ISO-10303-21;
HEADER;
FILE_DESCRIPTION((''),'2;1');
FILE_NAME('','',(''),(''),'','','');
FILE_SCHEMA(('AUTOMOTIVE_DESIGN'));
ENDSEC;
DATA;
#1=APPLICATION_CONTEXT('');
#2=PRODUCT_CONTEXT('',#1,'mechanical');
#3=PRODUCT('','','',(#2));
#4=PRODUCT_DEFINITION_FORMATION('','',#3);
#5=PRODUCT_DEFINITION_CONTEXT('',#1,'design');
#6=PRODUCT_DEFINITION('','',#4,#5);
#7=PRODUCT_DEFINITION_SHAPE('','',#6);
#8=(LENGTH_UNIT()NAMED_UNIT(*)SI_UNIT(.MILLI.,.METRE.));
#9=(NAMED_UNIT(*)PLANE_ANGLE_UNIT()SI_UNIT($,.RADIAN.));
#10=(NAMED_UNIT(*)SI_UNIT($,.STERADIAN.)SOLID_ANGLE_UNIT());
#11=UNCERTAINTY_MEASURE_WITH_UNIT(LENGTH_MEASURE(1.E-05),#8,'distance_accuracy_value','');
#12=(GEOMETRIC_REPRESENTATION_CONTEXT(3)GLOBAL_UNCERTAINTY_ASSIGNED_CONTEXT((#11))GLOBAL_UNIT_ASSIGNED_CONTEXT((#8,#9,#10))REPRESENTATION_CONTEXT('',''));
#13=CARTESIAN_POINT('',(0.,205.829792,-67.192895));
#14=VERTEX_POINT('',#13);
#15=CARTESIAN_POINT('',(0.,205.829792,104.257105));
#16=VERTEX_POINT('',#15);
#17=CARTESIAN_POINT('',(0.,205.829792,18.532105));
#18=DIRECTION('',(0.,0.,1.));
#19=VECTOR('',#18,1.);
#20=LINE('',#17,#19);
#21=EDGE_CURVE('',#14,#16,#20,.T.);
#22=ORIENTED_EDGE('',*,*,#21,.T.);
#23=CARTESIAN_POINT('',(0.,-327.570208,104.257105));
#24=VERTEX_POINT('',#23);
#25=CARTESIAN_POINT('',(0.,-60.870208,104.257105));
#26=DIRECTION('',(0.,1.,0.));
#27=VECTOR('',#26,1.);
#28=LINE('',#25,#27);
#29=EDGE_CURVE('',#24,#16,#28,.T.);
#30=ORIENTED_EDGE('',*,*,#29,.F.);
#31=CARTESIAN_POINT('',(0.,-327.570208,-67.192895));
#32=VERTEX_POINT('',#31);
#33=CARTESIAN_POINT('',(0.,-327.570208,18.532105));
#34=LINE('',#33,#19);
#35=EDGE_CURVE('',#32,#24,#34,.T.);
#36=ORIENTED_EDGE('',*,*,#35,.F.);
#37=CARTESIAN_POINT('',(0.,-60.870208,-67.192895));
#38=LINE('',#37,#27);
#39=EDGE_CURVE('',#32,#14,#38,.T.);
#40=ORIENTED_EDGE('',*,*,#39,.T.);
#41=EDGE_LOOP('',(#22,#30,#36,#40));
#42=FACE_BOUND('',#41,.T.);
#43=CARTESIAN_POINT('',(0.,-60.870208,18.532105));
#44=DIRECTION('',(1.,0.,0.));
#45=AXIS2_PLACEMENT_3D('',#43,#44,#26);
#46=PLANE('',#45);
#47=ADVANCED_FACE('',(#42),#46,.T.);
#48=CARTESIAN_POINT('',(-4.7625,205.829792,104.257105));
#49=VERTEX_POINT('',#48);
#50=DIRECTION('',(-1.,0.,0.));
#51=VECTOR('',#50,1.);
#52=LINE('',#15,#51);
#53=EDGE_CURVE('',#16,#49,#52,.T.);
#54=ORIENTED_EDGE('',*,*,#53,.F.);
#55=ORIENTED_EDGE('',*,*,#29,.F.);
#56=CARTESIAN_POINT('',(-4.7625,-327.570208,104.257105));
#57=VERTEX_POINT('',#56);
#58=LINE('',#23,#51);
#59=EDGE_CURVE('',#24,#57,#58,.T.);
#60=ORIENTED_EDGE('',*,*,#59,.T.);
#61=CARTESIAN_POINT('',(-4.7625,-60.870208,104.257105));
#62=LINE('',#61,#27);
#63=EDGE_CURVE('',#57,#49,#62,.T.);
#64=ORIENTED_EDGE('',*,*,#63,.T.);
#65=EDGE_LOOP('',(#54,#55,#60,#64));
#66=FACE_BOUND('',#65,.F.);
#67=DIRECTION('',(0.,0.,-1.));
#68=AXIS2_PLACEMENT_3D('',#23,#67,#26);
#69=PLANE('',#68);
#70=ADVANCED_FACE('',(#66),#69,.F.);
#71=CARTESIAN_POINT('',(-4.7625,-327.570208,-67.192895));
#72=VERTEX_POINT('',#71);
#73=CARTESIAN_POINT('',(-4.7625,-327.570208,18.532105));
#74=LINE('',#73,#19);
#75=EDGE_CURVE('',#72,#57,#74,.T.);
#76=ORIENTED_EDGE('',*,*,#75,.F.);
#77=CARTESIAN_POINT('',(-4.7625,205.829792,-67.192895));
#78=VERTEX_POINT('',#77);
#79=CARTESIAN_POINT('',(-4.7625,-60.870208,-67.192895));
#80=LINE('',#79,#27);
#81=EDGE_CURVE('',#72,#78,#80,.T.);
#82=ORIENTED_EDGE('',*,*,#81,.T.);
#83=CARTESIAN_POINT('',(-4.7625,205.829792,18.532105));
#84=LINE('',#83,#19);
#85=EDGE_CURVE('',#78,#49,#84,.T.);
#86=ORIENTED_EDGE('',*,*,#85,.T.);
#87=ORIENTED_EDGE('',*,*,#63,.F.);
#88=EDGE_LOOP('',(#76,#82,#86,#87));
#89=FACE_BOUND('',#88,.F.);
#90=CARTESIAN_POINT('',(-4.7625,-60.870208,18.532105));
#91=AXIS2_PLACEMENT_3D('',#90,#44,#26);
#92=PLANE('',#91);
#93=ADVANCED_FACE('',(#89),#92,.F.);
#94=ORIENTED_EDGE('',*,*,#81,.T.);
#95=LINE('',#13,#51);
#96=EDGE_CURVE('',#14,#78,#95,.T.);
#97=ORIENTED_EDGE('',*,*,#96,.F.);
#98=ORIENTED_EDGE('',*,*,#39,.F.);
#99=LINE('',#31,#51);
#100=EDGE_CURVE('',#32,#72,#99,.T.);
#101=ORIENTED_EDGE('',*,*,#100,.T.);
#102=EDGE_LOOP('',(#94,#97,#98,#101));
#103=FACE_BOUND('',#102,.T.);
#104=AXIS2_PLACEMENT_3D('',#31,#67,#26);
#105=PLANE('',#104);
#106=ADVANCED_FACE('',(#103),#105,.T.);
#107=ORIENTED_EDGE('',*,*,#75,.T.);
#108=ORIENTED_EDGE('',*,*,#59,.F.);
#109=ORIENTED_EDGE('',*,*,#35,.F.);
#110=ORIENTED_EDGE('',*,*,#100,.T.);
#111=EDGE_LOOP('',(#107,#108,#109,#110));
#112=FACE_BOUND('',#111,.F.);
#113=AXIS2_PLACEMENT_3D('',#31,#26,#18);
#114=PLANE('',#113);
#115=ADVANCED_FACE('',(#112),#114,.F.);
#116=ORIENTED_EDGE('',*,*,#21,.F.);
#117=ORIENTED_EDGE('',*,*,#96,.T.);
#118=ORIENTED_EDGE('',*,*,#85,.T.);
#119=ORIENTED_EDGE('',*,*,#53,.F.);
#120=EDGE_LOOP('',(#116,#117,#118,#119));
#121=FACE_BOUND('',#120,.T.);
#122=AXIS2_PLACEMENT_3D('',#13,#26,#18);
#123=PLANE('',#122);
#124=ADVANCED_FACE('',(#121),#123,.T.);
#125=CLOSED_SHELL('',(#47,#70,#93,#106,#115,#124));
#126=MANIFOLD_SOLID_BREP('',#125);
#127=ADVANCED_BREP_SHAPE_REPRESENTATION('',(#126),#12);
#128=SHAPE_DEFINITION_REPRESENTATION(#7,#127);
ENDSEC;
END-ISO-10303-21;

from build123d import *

# Parameters (mm, degrees)
F0_W     = 533.4
F0_H     = 171.45
F1_DEPTH = 4.7625


# Not quite as in the source:
# - a length typed as a fraction of an inch, garbled in the dataset ("3 / 203.2 mm" for 3/8 in), is restored


with BuildPart() as f1:
    # F0 (on Right) → F1 (new body)
    with BuildSketch(Plane.YZ):
        with Locations((-60.8702084428, 18.5321049437)):
            Rectangle(F0_W, F0_H)
    extrude(amount=-F1_DEPTH)


solid = f1.part
